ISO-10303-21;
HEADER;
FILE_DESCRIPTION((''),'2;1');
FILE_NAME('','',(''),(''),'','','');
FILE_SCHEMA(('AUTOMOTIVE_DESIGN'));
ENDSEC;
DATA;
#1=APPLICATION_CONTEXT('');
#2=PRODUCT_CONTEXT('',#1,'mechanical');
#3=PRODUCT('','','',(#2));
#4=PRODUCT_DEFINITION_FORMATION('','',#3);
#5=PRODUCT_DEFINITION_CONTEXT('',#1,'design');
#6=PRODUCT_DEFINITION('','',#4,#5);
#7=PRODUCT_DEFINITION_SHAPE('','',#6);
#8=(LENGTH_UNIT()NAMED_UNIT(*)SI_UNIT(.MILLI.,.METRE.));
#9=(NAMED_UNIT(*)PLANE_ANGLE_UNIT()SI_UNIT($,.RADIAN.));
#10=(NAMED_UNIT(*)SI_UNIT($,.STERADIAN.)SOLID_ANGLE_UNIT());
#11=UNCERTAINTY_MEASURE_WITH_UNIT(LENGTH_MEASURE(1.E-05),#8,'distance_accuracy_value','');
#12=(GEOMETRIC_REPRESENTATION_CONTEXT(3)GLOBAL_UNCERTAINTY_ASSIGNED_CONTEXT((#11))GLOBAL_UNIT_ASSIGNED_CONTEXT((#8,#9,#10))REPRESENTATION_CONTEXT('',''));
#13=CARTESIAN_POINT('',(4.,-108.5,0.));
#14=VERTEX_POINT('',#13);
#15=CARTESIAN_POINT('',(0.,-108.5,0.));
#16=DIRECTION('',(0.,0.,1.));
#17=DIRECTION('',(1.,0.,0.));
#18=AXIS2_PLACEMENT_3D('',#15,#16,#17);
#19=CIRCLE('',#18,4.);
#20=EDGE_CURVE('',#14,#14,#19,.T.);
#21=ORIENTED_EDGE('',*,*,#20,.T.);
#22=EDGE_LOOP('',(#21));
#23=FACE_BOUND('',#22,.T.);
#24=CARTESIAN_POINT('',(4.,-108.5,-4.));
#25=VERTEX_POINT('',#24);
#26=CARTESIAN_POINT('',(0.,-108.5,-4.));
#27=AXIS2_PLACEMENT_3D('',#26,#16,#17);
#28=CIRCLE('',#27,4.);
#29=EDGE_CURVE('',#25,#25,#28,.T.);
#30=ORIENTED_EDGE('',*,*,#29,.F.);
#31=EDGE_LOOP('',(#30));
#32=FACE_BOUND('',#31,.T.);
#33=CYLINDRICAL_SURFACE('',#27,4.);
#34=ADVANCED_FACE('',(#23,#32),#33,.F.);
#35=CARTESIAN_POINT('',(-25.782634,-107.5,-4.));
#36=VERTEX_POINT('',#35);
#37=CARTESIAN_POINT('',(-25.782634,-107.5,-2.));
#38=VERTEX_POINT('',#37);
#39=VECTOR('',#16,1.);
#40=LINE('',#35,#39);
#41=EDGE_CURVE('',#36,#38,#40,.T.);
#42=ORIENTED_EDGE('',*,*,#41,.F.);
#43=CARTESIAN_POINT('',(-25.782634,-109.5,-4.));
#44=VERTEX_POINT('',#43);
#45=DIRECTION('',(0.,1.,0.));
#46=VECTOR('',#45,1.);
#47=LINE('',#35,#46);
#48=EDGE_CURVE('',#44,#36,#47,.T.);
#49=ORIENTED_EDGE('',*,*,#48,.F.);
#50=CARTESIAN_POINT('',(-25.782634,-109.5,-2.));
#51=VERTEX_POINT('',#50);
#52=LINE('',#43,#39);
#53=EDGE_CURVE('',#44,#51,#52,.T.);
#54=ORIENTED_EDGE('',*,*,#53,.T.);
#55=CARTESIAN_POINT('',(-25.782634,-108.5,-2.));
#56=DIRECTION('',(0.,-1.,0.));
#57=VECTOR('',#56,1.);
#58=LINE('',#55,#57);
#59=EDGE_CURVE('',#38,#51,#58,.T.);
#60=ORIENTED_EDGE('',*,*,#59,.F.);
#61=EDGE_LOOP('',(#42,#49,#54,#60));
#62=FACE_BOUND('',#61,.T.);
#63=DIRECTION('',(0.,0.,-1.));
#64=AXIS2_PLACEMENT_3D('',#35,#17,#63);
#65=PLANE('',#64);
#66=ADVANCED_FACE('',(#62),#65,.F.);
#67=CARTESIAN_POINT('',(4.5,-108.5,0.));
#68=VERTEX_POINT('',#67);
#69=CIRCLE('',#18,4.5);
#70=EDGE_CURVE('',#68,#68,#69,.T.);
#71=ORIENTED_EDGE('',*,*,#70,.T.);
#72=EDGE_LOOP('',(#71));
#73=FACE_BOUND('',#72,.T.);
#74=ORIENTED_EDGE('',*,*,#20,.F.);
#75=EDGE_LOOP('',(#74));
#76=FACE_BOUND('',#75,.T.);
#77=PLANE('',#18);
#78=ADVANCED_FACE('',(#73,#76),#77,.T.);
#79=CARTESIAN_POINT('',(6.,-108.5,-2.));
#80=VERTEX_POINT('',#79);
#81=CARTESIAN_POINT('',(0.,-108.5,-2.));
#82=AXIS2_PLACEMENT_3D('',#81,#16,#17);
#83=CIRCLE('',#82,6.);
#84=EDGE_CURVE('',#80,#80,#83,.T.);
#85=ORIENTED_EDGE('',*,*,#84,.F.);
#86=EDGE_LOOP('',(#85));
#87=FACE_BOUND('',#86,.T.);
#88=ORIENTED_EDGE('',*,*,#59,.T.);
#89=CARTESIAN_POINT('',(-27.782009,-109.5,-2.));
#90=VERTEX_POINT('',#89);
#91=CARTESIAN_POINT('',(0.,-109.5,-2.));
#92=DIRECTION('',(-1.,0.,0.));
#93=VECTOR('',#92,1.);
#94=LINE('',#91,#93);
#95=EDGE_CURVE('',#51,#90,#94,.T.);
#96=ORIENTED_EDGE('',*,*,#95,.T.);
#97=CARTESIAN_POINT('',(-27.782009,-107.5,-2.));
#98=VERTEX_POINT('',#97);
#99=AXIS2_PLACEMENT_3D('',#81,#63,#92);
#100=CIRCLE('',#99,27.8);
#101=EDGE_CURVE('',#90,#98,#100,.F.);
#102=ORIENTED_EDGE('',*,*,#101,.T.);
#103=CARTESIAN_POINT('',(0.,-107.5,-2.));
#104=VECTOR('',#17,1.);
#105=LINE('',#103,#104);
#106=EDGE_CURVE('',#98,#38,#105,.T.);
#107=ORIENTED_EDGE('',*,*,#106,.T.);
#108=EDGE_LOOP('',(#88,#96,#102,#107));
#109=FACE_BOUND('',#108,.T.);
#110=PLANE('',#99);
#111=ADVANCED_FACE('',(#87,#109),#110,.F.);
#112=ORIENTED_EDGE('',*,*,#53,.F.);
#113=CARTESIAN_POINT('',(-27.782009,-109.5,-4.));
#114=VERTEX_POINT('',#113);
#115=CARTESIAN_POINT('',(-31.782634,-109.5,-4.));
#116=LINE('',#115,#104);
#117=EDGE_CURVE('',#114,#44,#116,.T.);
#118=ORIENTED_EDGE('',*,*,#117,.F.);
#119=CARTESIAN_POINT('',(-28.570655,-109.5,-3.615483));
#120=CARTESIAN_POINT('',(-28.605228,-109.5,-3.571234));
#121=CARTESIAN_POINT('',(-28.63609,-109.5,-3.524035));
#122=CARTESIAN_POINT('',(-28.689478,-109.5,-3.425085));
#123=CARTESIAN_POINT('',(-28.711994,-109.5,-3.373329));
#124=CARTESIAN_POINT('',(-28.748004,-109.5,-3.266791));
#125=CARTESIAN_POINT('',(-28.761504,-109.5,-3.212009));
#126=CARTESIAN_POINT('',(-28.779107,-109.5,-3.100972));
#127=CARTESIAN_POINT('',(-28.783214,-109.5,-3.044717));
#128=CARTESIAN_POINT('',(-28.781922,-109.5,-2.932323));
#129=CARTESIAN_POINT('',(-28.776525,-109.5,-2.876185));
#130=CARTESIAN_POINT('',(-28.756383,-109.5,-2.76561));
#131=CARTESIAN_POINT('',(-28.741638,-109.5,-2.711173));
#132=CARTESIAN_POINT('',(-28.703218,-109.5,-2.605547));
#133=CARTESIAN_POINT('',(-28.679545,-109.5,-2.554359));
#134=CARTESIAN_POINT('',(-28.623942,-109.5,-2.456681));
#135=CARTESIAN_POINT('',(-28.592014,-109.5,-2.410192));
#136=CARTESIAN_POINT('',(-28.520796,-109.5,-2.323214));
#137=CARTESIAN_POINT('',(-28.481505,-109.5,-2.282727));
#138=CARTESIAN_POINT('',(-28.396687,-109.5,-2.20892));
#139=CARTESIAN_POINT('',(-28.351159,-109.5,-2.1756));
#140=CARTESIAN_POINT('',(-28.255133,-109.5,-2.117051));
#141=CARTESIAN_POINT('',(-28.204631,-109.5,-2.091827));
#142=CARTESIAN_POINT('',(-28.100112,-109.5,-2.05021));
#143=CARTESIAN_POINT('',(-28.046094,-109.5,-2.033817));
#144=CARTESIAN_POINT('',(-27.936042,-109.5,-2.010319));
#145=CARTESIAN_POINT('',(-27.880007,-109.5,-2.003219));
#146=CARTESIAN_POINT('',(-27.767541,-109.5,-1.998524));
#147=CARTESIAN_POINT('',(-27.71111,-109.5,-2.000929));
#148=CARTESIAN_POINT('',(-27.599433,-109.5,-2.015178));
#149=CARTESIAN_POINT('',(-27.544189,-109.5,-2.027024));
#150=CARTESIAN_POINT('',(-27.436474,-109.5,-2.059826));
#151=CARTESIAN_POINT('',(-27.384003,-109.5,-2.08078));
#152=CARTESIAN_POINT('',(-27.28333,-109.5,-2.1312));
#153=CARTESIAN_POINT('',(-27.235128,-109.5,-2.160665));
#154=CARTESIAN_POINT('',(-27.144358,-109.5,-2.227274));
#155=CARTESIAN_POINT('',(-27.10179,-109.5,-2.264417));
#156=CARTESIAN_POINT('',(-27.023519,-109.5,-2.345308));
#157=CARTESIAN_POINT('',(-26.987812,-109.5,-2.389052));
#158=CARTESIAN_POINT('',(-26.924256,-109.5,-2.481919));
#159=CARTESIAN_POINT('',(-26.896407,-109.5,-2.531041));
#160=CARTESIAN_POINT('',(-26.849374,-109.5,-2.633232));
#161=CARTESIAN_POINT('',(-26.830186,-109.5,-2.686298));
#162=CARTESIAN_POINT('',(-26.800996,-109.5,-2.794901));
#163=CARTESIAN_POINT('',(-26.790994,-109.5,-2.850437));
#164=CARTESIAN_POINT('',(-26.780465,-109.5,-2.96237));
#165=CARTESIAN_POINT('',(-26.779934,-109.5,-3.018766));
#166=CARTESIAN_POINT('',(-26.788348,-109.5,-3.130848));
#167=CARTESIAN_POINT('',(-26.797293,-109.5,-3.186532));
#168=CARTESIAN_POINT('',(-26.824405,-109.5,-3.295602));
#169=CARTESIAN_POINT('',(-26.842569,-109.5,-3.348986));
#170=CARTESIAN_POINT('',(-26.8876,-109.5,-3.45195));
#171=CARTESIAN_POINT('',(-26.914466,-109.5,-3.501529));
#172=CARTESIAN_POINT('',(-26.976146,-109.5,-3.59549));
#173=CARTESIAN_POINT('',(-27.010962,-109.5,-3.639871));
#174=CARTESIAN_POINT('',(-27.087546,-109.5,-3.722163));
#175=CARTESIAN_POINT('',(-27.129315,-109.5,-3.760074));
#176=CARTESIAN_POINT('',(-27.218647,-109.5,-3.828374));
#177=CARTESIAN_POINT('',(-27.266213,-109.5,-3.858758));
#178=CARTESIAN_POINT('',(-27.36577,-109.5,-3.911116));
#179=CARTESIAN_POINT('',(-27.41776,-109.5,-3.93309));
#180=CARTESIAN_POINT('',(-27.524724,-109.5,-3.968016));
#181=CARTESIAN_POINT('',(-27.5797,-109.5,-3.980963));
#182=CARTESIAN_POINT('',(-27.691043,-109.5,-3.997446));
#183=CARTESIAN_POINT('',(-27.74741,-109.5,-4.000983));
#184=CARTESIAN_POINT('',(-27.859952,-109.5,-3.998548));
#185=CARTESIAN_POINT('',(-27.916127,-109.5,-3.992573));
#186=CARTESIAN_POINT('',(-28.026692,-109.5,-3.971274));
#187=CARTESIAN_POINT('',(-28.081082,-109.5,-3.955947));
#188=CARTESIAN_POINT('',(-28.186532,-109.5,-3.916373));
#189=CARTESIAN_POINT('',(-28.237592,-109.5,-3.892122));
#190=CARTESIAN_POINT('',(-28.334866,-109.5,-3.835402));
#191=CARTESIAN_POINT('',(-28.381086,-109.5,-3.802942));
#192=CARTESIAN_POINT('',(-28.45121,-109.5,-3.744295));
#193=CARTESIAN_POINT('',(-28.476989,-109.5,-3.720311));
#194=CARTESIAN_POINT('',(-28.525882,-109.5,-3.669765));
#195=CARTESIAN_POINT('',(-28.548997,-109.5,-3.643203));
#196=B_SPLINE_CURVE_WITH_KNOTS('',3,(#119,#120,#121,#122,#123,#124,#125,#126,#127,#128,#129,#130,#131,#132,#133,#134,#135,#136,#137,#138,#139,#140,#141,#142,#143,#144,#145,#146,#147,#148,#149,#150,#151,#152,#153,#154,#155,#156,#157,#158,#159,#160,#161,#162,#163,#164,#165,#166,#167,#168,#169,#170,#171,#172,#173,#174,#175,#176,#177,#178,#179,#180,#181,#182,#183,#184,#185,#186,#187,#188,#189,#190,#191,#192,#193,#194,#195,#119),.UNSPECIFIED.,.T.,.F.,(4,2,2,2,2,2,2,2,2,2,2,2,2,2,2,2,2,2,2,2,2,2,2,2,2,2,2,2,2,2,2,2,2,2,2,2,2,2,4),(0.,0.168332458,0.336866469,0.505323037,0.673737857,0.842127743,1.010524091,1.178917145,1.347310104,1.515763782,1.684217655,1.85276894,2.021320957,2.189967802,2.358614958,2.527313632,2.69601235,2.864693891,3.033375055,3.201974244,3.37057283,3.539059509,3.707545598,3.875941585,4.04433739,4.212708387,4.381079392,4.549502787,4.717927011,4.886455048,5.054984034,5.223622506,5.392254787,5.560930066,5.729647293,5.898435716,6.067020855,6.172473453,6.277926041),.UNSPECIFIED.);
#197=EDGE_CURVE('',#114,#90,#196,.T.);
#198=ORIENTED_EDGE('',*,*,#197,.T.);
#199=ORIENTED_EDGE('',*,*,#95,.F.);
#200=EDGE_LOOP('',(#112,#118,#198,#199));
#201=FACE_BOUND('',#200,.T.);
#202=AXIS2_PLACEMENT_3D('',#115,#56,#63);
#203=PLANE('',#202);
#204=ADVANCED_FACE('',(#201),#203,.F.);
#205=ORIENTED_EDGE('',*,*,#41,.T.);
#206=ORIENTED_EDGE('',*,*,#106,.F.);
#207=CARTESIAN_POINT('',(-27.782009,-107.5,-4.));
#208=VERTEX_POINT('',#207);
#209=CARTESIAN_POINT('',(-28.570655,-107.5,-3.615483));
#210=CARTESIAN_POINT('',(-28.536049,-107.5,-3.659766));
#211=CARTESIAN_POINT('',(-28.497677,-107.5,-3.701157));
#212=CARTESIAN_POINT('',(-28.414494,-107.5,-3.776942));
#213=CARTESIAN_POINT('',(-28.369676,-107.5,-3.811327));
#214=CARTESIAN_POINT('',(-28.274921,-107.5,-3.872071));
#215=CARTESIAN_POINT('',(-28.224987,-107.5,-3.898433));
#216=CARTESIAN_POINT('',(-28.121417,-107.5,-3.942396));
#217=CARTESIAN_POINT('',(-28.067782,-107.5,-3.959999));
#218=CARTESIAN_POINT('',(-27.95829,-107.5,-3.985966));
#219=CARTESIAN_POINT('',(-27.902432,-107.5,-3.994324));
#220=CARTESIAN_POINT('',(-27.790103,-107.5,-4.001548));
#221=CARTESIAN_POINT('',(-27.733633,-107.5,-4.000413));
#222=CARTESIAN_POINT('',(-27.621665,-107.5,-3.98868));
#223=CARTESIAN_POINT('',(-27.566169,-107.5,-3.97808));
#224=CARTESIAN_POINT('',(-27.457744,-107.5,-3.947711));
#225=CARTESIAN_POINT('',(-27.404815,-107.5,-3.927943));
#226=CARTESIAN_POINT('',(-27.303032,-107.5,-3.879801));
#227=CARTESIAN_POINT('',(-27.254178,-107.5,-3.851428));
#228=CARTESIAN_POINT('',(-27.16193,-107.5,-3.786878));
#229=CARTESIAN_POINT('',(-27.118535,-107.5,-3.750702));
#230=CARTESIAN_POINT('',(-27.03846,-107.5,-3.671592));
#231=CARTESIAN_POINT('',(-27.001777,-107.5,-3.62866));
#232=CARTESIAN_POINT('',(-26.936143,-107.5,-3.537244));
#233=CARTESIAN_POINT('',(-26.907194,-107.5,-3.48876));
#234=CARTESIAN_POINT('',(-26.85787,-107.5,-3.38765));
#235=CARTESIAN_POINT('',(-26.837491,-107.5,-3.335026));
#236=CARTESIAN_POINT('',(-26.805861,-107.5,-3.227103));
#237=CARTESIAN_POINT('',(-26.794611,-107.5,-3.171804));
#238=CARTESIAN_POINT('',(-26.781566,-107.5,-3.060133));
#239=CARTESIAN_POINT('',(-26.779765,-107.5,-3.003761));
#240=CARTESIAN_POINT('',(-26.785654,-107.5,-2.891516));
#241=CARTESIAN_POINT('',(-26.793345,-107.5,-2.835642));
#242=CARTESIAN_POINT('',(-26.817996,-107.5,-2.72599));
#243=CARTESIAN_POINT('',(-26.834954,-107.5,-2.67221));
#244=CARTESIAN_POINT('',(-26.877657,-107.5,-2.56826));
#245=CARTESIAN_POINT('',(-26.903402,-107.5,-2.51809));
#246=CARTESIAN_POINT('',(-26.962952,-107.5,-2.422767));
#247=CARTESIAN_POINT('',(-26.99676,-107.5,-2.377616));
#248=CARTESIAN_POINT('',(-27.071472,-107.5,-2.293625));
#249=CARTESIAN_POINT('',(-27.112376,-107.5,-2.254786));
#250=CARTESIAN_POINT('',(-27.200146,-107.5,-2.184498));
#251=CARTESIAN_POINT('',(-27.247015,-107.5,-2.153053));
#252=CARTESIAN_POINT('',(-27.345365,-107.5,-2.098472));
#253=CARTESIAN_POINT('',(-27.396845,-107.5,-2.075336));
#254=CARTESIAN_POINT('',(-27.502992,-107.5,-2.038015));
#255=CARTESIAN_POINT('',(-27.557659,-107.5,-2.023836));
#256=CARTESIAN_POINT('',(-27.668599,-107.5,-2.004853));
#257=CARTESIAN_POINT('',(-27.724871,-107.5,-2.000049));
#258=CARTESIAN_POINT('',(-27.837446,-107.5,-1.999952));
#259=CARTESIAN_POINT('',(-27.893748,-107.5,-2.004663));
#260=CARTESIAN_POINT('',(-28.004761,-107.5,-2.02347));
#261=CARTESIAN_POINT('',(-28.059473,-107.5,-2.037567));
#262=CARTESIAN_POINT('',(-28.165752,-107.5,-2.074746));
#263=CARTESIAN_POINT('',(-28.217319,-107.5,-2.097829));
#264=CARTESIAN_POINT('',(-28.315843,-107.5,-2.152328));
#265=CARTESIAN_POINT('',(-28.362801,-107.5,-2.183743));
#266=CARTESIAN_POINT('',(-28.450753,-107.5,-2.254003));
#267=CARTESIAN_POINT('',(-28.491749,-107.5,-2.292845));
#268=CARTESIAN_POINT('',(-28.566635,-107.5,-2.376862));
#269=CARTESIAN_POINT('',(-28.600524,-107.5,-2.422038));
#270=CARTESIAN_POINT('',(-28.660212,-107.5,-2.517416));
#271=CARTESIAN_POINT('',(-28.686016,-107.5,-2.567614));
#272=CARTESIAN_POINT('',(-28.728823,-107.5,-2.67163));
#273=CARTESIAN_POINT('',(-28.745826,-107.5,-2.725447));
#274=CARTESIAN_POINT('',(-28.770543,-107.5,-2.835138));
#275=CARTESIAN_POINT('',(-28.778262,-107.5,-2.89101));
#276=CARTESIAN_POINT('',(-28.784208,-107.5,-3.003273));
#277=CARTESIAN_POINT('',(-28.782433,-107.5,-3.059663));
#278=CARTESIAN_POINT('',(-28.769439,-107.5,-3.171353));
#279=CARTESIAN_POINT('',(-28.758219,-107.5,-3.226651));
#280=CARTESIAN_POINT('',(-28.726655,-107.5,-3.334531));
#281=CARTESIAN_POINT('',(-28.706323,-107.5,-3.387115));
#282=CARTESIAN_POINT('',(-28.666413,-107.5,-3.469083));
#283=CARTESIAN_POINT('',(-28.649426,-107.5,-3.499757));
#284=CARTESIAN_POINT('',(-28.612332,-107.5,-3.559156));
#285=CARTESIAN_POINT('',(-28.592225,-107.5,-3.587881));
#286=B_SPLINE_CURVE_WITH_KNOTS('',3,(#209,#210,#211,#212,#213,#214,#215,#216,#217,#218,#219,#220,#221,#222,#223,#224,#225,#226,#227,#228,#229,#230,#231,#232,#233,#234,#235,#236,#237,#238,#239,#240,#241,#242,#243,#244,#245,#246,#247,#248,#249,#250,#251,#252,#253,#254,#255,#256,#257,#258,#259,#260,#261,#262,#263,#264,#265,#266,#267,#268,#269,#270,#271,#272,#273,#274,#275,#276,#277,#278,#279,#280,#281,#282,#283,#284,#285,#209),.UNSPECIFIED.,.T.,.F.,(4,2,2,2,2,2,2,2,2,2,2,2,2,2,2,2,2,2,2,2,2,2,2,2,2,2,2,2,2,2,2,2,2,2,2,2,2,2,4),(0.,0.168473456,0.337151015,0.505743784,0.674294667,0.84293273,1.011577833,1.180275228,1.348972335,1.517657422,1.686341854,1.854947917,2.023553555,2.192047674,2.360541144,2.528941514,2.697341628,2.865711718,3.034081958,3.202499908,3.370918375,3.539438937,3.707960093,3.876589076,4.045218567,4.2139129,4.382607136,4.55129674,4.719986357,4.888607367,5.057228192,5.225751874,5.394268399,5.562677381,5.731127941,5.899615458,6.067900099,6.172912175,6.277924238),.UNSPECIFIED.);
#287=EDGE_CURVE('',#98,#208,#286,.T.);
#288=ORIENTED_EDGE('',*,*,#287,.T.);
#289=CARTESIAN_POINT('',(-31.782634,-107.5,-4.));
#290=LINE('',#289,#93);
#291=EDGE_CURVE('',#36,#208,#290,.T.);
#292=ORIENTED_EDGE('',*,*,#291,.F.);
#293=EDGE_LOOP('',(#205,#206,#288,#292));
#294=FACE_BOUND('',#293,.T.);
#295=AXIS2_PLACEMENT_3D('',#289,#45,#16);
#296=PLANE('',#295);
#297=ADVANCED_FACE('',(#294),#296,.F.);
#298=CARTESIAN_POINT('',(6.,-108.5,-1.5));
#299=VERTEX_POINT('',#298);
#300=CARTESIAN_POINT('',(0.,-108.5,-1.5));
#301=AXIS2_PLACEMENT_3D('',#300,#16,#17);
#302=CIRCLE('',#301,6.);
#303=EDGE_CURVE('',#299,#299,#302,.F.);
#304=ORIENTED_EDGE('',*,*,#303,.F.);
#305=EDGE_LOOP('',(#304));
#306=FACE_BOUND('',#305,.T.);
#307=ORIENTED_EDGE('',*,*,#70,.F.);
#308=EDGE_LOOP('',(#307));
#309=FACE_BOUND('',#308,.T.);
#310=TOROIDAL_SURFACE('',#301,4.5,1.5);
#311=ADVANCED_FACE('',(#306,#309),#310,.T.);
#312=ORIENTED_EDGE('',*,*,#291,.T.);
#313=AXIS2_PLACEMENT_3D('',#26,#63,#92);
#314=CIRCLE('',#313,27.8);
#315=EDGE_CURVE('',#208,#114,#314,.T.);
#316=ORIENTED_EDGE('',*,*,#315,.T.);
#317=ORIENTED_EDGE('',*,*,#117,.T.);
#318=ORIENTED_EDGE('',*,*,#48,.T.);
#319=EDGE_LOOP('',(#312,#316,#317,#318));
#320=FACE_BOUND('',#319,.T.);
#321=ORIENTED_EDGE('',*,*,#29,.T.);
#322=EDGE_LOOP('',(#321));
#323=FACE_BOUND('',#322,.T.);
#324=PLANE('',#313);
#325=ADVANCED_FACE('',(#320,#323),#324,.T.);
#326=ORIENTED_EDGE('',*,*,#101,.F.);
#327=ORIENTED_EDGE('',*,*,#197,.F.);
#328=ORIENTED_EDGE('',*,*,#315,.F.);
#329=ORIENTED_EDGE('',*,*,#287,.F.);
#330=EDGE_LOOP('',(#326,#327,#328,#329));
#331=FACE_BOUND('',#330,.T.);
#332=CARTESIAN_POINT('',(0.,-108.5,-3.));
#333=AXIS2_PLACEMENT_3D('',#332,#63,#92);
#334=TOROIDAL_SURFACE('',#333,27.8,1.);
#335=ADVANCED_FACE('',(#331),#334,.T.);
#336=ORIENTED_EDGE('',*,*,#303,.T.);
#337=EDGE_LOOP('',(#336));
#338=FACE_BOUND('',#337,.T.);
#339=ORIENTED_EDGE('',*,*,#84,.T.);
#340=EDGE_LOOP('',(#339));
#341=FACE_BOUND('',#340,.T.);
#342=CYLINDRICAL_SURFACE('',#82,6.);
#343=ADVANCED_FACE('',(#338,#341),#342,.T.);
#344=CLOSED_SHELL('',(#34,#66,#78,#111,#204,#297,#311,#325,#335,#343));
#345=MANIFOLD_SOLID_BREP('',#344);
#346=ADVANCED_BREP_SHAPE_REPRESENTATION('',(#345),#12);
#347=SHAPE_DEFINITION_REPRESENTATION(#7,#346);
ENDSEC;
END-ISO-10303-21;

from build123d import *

# Parameters (mm, degrees)
SKETCH1_R           = 6
BOSS_EXTRUDE1_DEPTH = 2
SKETCH2_R           = 28.8
BOSS_EXTRUDE2_DEPTH = 2
SKETCH3_R           = 4
CUT_EXTRUDE1_DEPTH  = 141.3450391
FILLET1_R           = 1.5
FILLET2_R           = 1
SKETCH4_W           = 6
SKETCH4_H           = 2
CUT_EXTRUDE2_DEPTH  = 141.345039121


with BuildPart() as part:
    # Sketch1 → Boss-Extrude1 (new body)
    with BuildSketch(Plane.XY):
        with Locations((0, -108.5)):
            Circle(SKETCH1_R)
    extrude(amount=-BOSS_EXTRUDE1_DEPTH)

    # Sketch2 → Boss-Extrude2 (add)
    with BuildSketch(Plane(origin=(0, 0, -2), x_dir=(-1, 0, 0), z_dir=(0, 0, -1))):
        with Locations((0, -108.5)):
            Circle(SKETCH2_R)
    extrude(amount=BOSS_EXTRUDE2_DEPTH)

    # Sketch3 → Cut-Extrude1 (cut, through all)
    with BuildSketch(Plane.XY):
        with Locations((0, -108.5)):
            Circle(SKETCH3_R)
    extrude(amount=-CUT_EXTRUDE1_DEPTH, mode=Mode.SUBTRACT)

    # Fillet1
    fillet1_edges = [part.edges().sort_by_distance(p)[0] for p in [
        (-6, -108.5, 0),
    ]]
    fillet(fillet1_edges, radius=FILLET1_R)

    # Fillet2
    fillet2_edges = [part.edges().sort_by_distance(p)[0] for p in [
        (28.8, -108.5, -2),
        (28.8, -108.5, -4),
    ]]
    fillet(fillet2_edges, radius=FILLET2_R - 0.0001)  # a hair under: the kernel refuses the full size

    # Sketch4 → Cut-Extrude2 (cut, through all)
    with BuildSketch(Plane.XY):
        with Locations((-28.782633653, -108.5)):
            Rectangle(SKETCH4_W, SKETCH4_H)
    extrude(amount=-CUT_EXTRUDE2_DEPTH, mode=Mode.SUBTRACT)


solid = part.part
